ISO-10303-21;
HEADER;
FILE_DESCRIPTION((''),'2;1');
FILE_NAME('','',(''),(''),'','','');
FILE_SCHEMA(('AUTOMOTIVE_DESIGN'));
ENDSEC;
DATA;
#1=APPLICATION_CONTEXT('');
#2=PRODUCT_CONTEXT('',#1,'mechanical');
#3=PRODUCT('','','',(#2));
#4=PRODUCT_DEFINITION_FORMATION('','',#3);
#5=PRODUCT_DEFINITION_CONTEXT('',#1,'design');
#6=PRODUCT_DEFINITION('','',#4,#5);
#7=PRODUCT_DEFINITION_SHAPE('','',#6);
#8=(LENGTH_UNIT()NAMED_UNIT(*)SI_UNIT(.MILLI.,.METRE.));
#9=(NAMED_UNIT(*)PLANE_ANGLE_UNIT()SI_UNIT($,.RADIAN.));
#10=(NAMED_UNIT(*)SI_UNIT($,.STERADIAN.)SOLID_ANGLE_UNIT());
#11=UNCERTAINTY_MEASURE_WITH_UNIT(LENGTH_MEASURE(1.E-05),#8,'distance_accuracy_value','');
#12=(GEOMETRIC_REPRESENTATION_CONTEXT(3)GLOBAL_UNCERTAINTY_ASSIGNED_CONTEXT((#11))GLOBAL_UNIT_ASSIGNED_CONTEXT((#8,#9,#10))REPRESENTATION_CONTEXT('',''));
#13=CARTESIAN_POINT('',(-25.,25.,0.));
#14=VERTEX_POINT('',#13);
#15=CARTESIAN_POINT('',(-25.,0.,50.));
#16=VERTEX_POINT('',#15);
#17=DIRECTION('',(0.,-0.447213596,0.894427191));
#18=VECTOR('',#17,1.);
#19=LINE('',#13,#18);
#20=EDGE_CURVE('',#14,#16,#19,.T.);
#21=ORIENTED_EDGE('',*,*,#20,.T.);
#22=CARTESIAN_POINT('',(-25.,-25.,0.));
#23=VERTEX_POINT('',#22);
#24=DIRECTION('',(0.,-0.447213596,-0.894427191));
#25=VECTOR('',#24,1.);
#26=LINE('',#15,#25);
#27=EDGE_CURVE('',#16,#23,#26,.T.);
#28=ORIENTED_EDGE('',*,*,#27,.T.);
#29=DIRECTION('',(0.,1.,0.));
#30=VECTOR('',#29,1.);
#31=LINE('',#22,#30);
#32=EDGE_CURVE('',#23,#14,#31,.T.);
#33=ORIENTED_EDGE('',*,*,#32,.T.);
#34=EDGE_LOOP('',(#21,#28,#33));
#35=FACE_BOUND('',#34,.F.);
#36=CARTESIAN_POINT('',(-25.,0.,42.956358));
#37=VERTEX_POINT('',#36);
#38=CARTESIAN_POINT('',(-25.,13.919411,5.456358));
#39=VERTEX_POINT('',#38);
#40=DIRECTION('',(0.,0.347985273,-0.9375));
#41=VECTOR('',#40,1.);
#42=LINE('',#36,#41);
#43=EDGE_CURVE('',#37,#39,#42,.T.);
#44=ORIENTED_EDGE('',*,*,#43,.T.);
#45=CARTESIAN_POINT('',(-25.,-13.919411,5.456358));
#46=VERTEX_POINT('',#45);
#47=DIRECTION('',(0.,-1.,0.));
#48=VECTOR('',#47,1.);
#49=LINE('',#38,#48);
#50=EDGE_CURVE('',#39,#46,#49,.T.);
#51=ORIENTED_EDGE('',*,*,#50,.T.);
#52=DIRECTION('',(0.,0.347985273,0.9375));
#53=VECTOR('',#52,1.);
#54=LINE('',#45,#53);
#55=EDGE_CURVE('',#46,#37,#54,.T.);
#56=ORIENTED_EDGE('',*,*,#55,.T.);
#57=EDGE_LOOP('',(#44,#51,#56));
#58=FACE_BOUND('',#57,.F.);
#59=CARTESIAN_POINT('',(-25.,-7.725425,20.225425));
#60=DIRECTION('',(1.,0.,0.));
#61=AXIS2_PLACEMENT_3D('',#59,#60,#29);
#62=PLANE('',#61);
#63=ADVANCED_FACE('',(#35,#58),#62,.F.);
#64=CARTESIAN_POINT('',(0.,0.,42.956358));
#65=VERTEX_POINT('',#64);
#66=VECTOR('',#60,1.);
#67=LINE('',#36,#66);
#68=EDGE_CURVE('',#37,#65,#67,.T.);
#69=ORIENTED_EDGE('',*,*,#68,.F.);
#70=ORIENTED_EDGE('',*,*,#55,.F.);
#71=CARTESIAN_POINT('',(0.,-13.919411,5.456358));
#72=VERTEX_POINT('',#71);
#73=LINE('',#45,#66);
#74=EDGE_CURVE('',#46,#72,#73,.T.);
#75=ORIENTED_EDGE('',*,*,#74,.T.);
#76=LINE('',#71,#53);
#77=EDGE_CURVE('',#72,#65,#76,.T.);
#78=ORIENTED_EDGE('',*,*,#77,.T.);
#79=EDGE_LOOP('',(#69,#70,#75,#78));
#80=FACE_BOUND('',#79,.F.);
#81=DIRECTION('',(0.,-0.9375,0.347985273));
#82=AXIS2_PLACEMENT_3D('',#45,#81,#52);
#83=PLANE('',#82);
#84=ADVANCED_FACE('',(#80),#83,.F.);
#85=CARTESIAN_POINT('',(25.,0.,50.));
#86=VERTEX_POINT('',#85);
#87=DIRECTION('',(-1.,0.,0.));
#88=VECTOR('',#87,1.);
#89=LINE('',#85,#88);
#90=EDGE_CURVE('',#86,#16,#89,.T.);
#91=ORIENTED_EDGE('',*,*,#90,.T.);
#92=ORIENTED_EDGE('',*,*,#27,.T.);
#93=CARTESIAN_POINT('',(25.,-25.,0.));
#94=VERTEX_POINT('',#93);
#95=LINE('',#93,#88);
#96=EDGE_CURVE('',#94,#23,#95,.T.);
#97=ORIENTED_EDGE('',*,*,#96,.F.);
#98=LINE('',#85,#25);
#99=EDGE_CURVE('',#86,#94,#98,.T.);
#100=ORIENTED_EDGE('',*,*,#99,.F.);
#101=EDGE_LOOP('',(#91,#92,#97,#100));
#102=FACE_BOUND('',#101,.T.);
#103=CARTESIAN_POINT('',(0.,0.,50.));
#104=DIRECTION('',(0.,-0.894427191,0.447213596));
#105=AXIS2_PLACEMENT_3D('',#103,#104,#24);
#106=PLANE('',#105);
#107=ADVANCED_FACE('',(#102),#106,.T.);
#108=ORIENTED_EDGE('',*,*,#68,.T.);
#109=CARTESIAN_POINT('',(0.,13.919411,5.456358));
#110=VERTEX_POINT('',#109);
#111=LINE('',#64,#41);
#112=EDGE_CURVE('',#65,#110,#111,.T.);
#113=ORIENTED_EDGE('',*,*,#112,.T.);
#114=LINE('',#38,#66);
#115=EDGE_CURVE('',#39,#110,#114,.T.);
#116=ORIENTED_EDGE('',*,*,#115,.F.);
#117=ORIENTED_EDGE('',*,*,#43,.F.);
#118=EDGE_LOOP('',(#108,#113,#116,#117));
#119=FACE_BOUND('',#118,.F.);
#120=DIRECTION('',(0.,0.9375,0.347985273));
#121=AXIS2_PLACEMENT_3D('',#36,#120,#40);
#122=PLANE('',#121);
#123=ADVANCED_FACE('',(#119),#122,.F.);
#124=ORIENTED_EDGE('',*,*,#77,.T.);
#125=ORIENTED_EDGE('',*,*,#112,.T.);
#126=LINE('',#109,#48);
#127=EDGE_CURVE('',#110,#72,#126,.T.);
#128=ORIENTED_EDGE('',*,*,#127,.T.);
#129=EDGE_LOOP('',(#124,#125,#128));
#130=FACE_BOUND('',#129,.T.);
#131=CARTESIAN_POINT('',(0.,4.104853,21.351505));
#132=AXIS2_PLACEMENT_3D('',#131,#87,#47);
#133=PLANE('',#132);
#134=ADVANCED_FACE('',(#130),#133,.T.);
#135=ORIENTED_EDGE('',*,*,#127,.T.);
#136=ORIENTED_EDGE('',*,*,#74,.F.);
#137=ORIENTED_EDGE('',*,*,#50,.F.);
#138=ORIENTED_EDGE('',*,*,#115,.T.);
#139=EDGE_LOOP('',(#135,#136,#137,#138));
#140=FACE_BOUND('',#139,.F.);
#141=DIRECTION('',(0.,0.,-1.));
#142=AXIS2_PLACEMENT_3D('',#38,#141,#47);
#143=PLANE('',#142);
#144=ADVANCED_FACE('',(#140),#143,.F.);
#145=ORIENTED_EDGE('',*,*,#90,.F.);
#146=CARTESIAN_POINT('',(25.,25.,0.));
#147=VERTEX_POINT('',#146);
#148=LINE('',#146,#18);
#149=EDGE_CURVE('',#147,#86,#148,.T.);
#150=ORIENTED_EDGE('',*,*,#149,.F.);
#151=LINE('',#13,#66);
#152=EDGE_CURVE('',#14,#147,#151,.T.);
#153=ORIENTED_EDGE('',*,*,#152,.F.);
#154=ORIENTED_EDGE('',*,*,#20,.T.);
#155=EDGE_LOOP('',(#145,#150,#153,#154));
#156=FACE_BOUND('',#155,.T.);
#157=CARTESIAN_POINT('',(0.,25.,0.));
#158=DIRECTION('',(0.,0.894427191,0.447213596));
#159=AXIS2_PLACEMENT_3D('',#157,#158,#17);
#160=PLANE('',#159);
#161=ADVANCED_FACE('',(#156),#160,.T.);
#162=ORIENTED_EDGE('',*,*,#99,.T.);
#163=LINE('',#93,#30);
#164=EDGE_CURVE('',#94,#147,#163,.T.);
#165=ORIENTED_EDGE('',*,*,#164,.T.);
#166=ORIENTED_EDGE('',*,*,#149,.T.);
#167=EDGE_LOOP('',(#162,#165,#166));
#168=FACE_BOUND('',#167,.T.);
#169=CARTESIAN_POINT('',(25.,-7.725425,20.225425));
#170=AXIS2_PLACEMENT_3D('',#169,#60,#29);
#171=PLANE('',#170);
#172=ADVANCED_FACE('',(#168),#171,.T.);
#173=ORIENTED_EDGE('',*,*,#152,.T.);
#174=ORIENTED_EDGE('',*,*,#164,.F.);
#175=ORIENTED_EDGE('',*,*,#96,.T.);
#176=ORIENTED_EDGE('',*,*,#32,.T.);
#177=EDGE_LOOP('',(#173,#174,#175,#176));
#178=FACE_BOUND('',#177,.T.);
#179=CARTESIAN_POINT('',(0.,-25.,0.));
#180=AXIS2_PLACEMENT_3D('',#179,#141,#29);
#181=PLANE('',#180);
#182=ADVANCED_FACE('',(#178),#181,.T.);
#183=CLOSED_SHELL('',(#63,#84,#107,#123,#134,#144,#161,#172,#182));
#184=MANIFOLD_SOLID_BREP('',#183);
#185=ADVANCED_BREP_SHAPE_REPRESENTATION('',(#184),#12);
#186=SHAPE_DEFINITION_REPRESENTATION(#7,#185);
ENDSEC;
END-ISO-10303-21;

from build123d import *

# Parameters (mm, degrees)
F1_DEPTH = 25
F2_DEPTH = 25
F4_DEPTH = 25


# Not quite as in the source:
# - a feature of the source that left no trace in its solid (it failed there, or was rolled back) is left out


with BuildPart() as f1:
    # F0 (on Right) → F1 (new body)
    with BuildSketch(Plane.YZ):
        Polygon((-25, 0), (0, 0), (0, 50), align=None)
        Polygon((0, 50), (0, 0), (25, 0), align=None)
    extrude(amount=F1_DEPTH)

    # F2 (add): a face of the model
    f2_faces = [f1.faces().sort_by_distance(p)[0] for p in [
        (0, 0, 16.6666666667),
    ]]
    extrude(f2_faces, amount=F2_DEPTH)

    # F3 (on face) → F4 (cut)
    with BuildSketch(Plane(origin=(-25, 0, 0), x_dir=(0, -1, 0), z_dir=(-1, 0, 0))):
        Polygon((-13.9194109071, 5.4563577287), (0, 5.4563577287), (0, 42.9563577287), align=None)
        Polygon((0, 42.9563577287), (0, 5.4563577287), (13.9194109071, 5.4563577287), align=None)
    extrude(amount=-F4_DEPTH, mode=Mode.SUBTRACT)


solid = f1.part
